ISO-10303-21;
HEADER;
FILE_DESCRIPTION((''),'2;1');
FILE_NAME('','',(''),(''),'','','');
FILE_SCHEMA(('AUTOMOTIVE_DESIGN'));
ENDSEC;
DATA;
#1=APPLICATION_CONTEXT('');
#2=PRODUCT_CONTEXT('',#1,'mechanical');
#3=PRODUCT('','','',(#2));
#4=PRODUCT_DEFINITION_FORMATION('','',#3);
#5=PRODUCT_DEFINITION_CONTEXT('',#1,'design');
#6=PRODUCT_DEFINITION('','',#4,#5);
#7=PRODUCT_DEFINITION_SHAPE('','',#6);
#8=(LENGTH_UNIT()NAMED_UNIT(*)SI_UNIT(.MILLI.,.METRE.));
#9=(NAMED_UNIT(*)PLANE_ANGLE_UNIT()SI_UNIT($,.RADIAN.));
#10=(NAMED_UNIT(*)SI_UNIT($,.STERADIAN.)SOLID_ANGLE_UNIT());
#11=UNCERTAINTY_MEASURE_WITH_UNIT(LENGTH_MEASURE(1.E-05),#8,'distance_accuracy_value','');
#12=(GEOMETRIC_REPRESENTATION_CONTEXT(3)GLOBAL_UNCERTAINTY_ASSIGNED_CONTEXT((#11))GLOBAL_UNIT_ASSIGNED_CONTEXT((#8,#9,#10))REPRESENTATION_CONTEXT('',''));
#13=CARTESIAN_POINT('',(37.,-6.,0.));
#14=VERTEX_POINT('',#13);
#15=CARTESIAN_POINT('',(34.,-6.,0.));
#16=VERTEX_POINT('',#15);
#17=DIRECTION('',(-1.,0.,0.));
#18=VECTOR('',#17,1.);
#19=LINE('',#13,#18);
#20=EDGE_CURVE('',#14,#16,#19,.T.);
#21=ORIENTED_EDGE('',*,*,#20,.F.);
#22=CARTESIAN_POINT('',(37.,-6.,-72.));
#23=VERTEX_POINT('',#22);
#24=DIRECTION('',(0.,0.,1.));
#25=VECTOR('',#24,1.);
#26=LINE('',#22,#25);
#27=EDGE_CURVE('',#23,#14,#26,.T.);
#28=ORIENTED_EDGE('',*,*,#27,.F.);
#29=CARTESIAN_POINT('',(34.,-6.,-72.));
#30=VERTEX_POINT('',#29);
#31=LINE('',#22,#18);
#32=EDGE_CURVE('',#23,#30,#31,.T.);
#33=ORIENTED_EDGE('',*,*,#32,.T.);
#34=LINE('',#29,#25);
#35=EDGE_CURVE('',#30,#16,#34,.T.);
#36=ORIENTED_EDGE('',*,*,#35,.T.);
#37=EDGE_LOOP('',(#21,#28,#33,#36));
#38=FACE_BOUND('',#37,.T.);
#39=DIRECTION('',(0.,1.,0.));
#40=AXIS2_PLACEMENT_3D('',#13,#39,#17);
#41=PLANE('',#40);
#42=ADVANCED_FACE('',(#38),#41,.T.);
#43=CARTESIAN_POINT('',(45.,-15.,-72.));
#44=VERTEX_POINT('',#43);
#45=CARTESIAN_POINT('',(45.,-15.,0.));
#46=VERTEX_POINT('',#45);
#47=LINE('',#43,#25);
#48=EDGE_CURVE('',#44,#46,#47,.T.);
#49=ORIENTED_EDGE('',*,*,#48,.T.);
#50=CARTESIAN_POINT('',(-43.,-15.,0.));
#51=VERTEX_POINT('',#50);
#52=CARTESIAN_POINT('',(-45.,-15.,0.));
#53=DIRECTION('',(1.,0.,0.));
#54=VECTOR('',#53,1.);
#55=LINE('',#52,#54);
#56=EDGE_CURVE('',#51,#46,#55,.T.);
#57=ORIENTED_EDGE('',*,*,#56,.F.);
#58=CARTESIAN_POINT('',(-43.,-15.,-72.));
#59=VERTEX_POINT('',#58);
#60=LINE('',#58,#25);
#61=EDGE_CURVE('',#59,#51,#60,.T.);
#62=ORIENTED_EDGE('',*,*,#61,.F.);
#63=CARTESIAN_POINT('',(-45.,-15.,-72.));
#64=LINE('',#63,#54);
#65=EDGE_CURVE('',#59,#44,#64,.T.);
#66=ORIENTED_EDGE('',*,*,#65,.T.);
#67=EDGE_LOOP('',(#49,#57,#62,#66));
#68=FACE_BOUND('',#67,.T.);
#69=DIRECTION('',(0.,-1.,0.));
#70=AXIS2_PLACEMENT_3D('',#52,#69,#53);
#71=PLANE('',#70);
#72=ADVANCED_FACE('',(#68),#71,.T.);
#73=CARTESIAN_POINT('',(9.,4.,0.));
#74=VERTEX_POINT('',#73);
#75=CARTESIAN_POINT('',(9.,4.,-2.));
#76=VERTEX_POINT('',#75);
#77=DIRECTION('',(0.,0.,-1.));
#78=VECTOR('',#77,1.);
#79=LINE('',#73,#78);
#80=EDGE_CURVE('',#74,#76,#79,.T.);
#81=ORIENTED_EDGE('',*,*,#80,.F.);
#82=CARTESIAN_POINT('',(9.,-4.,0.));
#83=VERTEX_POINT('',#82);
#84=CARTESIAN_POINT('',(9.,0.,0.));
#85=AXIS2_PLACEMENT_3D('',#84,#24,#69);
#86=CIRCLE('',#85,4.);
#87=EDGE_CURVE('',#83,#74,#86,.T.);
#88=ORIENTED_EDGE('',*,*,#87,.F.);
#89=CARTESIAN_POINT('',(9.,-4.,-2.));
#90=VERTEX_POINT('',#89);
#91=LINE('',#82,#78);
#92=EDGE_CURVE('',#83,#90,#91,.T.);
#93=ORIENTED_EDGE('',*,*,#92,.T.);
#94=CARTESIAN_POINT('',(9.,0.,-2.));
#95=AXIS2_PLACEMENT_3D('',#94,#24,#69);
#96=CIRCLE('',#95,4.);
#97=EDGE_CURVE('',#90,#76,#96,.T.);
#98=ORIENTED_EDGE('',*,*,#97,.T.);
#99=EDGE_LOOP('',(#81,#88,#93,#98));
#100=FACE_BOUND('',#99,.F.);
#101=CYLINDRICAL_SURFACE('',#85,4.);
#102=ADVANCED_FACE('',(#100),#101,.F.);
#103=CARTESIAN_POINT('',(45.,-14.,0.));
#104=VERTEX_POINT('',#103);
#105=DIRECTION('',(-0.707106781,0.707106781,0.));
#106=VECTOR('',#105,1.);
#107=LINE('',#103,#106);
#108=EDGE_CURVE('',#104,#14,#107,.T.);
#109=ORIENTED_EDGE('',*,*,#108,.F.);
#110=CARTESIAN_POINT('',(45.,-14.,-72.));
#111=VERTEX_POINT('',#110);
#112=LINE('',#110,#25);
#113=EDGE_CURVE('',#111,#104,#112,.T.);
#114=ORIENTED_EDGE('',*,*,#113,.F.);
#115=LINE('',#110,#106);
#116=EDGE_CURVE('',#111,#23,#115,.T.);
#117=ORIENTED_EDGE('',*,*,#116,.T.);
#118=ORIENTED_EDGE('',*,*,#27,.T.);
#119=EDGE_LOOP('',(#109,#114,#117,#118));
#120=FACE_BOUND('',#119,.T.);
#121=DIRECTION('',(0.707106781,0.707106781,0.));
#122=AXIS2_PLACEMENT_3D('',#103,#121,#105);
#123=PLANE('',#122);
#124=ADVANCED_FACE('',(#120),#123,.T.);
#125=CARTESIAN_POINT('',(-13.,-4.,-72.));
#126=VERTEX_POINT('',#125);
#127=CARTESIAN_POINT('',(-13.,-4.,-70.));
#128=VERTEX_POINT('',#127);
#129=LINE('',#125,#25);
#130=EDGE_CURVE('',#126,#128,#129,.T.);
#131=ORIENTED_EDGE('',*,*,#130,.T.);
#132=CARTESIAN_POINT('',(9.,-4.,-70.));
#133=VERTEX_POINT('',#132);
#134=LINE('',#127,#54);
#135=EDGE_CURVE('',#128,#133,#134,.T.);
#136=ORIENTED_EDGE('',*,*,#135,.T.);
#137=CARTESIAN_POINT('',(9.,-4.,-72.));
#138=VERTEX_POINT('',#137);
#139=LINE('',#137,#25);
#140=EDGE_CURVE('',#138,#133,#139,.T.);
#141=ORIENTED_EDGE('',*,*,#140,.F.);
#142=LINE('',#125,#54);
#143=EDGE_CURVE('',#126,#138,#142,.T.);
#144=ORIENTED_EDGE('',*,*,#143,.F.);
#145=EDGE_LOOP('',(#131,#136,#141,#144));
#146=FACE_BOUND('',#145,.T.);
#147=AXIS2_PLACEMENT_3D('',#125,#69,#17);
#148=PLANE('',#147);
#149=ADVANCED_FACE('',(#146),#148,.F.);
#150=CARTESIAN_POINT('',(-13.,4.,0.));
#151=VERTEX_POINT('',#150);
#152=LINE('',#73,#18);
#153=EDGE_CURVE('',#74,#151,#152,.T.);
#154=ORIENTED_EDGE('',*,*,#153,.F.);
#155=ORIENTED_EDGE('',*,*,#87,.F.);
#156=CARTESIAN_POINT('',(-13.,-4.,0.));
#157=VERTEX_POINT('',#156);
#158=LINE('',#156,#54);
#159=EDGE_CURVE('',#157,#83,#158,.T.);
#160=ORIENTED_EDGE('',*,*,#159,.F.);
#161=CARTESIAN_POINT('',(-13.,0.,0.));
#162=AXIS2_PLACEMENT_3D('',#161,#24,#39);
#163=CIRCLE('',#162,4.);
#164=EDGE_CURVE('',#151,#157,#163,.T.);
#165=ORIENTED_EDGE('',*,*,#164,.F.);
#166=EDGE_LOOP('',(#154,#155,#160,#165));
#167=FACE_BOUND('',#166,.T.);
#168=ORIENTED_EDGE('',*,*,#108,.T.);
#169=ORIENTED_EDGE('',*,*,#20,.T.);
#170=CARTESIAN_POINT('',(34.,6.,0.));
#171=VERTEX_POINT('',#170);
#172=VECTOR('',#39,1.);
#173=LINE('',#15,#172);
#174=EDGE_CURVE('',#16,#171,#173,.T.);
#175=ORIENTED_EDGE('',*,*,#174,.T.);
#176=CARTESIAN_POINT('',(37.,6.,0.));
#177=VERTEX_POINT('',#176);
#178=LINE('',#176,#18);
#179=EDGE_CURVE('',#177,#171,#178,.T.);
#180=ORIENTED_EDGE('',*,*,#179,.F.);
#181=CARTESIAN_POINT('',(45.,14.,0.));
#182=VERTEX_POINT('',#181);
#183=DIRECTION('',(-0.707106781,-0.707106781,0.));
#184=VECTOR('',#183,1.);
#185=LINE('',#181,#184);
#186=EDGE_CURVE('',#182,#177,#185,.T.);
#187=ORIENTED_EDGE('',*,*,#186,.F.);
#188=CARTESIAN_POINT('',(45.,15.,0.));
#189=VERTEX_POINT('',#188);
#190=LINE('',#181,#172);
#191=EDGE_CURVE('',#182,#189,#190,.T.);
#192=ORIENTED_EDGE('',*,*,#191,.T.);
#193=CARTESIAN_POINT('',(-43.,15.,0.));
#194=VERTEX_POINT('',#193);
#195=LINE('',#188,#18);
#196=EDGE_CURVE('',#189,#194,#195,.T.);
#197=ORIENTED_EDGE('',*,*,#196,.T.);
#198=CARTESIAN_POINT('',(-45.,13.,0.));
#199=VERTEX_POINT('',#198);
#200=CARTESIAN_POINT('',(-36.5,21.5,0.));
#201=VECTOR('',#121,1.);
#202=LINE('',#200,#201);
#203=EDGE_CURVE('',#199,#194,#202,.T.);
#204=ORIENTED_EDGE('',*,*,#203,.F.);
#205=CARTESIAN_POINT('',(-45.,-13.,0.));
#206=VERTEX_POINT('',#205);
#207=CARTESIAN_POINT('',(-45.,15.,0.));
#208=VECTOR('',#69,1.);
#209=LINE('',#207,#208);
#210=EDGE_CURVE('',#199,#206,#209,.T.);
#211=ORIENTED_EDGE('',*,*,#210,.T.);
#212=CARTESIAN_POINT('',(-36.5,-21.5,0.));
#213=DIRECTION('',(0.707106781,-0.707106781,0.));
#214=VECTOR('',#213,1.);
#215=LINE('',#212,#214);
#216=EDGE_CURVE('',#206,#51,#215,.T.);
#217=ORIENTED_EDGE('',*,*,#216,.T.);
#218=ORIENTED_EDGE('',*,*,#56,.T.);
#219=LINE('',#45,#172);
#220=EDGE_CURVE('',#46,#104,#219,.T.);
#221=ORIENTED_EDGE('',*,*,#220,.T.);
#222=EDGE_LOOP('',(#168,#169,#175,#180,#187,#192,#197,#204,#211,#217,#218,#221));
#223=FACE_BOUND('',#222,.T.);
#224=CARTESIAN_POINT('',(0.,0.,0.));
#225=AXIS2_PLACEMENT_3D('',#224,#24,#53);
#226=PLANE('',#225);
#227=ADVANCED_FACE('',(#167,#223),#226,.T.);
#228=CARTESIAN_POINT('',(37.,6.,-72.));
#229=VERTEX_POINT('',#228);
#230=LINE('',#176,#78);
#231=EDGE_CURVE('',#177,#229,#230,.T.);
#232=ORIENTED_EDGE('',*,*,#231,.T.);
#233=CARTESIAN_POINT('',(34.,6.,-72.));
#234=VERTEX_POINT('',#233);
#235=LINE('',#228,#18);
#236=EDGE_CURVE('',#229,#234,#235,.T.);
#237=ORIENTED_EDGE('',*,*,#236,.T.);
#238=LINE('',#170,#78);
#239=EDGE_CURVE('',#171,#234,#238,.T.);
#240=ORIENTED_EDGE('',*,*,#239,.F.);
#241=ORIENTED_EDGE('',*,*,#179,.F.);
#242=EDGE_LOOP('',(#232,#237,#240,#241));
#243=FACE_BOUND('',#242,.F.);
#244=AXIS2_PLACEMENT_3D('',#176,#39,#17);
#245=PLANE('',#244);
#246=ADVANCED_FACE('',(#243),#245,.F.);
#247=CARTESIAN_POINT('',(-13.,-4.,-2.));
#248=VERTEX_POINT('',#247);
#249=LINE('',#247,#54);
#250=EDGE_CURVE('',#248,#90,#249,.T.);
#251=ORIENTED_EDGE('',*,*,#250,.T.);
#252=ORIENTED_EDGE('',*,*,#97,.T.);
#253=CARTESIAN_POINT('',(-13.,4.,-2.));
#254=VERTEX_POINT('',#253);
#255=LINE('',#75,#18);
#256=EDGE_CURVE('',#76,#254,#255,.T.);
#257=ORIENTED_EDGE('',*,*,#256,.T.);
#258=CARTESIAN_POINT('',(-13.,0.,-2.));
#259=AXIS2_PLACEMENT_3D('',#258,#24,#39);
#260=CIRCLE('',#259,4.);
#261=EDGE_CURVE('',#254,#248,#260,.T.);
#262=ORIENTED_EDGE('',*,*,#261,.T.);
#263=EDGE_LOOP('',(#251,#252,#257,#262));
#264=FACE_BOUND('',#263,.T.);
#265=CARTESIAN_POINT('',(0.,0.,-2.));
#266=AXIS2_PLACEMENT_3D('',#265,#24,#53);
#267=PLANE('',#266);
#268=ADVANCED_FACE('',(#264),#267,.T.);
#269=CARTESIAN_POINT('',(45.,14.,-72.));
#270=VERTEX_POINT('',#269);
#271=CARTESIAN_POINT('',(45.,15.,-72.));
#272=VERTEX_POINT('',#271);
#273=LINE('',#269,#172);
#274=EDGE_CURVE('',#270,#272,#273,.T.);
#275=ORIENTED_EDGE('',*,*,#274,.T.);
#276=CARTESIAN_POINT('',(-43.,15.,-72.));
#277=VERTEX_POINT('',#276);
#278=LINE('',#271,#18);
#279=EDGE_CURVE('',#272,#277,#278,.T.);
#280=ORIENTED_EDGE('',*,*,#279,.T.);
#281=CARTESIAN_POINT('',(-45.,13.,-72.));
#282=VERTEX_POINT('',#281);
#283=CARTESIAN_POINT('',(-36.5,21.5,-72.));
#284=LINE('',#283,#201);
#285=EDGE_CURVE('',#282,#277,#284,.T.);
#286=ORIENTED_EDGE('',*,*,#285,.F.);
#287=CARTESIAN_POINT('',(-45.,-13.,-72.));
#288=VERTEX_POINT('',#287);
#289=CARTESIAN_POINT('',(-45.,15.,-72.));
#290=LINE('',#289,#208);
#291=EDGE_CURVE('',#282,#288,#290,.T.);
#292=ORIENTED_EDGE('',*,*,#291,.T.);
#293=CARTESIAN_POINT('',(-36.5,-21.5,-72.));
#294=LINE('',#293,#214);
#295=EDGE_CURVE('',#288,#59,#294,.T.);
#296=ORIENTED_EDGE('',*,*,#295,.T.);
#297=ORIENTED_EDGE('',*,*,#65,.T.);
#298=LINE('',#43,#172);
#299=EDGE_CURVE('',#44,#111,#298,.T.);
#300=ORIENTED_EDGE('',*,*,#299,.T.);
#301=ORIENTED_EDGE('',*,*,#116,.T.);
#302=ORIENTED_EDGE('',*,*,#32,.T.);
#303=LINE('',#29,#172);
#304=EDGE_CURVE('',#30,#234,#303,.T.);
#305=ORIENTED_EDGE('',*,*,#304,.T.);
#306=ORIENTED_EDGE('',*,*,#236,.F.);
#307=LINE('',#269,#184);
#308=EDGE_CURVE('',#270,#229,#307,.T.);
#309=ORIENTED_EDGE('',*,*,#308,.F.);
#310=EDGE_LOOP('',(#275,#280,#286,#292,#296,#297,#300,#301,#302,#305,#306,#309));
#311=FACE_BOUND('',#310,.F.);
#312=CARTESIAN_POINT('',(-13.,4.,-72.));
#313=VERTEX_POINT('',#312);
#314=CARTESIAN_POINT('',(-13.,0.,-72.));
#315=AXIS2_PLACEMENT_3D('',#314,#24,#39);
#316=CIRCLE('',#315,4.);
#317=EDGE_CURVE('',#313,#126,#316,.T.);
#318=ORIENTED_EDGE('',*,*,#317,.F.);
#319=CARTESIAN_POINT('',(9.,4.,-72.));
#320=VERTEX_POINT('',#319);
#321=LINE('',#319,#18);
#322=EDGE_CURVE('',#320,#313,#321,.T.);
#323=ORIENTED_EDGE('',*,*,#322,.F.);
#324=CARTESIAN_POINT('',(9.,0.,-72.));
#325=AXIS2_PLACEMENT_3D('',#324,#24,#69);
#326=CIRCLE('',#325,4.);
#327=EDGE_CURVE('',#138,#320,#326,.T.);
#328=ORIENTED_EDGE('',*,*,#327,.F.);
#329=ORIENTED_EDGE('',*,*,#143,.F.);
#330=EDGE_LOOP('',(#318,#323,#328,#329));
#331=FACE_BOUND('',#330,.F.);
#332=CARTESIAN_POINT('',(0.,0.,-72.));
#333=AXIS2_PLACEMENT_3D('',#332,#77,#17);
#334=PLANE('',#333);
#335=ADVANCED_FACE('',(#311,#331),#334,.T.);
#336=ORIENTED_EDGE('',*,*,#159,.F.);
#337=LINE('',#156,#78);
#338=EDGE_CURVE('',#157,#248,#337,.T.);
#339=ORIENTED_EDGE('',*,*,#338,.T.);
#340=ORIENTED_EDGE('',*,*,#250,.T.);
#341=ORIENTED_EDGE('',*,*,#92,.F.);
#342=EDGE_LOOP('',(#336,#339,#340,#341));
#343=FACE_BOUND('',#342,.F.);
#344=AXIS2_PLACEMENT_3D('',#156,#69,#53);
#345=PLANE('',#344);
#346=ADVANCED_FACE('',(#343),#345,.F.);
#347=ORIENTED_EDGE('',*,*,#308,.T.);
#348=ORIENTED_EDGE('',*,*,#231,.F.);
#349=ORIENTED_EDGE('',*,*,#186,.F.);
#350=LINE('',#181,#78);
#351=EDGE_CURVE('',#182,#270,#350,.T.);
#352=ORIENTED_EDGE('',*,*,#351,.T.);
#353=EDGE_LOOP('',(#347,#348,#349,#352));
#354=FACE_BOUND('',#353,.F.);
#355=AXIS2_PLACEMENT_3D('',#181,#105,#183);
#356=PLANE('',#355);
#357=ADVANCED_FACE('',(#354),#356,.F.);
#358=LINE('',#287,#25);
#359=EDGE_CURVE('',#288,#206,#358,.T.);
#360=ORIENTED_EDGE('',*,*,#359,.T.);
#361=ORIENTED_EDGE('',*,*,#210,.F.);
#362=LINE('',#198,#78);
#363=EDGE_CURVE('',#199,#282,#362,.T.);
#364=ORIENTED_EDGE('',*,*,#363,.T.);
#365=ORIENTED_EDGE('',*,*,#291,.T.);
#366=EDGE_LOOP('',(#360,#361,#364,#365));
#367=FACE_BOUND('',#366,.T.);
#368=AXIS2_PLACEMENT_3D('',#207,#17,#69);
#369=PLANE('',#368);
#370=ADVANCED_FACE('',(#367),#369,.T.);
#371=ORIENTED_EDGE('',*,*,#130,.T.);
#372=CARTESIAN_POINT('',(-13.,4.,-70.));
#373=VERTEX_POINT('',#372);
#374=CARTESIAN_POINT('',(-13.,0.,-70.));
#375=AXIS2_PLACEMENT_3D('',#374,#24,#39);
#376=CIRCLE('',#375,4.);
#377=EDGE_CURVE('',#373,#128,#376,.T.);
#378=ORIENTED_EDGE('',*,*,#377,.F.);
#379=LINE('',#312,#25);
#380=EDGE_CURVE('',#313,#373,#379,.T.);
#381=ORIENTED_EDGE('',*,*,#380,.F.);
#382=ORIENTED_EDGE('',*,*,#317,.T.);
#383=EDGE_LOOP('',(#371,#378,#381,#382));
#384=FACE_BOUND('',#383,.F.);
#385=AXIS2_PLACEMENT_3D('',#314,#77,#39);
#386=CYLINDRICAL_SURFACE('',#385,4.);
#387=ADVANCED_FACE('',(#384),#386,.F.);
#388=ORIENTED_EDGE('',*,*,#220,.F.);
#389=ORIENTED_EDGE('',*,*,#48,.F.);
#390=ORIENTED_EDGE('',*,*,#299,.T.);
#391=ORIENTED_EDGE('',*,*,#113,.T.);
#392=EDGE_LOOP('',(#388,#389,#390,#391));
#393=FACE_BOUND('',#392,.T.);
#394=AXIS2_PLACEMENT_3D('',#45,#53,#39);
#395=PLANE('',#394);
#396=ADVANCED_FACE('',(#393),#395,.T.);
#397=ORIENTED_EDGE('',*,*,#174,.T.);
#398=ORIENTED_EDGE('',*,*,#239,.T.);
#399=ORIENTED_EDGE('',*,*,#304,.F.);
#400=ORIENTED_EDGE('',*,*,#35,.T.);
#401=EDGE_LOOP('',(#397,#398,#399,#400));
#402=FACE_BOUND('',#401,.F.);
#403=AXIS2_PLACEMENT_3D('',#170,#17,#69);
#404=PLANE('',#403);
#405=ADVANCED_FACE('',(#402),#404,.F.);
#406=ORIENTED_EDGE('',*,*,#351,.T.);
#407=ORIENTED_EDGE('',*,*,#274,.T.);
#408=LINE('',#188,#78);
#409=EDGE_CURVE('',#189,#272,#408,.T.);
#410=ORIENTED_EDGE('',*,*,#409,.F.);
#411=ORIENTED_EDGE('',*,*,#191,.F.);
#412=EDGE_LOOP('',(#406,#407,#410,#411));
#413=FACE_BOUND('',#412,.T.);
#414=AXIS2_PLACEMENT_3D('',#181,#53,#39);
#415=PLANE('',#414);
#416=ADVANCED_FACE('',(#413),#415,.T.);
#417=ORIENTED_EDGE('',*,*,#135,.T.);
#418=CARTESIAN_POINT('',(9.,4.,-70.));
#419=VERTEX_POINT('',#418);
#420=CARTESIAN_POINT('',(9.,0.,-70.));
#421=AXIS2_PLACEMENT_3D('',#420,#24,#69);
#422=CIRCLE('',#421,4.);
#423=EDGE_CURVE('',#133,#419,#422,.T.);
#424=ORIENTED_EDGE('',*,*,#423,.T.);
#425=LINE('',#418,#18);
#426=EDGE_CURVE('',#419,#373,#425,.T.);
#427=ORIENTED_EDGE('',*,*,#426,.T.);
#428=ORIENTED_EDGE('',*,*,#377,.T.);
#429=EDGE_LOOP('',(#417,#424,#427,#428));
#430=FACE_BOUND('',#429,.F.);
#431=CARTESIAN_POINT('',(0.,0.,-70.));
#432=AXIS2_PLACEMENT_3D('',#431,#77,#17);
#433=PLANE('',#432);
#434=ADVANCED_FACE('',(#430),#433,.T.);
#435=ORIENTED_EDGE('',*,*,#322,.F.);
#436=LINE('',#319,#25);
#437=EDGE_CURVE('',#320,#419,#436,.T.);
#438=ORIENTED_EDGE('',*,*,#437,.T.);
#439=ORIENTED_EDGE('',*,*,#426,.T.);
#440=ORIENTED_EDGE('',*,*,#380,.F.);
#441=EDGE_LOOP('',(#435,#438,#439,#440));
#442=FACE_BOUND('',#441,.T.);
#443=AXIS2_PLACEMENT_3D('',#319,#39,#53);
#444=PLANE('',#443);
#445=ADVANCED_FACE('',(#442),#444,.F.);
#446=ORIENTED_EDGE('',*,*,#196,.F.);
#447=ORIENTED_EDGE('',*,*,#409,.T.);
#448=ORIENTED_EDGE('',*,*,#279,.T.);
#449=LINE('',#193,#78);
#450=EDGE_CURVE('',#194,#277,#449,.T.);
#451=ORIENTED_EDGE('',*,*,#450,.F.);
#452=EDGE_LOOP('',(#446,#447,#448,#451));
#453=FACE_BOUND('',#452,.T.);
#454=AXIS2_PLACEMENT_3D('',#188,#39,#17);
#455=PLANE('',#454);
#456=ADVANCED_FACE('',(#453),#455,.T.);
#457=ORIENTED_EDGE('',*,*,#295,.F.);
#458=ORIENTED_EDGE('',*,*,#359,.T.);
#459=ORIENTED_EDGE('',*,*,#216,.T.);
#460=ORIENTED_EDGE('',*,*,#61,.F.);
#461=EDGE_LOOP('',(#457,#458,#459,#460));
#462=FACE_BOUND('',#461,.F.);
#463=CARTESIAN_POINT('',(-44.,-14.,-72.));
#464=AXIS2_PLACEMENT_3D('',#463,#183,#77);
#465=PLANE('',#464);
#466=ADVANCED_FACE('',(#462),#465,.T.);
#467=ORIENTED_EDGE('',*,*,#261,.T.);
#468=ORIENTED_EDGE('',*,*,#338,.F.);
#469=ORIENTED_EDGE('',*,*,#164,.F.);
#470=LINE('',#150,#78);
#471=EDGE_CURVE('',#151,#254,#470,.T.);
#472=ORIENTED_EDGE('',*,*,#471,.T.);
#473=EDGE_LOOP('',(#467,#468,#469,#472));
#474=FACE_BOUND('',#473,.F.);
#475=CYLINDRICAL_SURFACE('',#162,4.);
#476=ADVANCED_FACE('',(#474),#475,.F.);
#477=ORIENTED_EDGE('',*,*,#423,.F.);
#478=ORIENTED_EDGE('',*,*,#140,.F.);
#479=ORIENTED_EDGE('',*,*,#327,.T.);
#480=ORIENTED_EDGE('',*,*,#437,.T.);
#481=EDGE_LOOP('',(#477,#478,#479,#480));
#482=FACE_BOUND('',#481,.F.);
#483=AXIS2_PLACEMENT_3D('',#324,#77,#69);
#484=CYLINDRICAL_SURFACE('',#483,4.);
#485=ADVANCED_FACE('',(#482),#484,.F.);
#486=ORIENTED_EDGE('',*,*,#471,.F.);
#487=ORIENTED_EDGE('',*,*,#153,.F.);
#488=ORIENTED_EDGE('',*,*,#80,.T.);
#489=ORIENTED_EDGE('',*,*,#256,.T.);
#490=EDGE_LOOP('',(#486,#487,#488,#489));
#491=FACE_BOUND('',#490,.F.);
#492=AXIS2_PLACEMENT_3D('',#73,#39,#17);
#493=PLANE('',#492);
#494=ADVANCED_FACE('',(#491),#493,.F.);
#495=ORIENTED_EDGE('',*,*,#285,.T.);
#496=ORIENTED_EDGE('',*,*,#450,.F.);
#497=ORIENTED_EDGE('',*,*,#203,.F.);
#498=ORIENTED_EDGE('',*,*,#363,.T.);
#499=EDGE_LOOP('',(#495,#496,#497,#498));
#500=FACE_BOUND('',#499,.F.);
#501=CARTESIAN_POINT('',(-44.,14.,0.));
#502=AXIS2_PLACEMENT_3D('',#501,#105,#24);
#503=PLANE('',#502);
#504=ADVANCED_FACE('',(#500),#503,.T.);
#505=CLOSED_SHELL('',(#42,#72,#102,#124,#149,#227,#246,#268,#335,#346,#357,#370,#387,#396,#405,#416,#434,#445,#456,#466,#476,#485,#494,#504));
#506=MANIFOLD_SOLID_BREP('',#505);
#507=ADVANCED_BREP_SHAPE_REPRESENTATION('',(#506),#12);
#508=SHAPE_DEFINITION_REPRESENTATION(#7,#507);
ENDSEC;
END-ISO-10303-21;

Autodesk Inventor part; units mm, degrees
ref_plane "YZ Plane" through (0, 0, 0) normal (1, 0, 0) x (0, 1, 0)
ref_plane "XZ Plane" through (0, 0, 0) normal (0, 1, 0) x (-1, 0, 0)
ref_plane "XY Plane" through (0, 0, 0) normal (0, 0, 1) x (1, 0, 0)
sketch "Эскиз1" plane through (0, 0, 0) normal (0, 0, 1) x (1, 0, 0)
  line L0 (-45, -15) -> (45, -15)
  line L1 (45, 15) -> (-45, 15)
  line L2 (-45, 15) -> (-45, -15)
  line L3 (-45, -15) -> (45, 15) construction
  line L4 (45, -15) -> (-45, 15) construction
  line L5 (45, 14) -> (37, 6)
  line L6 (37, 6) -> (34, 6)
  line L7 (34, 6) -> (34, 0)
  line L8 (34, 0) -> (45, 0) construction
  line L9 (45, -14) -> (37, -6)
  line L10 (37, -6) -> (34, -6)
  line L11 (34, -6) -> (34, 0)
  line L12 (-13, 0) -> (9, 0) construction
  line L13 (-13, -4) -> (9, -4)
  line L14 (9, 4) -> (-13, 4)
  arc A0 (-13, 4) -> (-13, -4) centre (-13, 0) ccw
  arc A1 (9, -4) -> (9, 4) centre (9, 0) ccw
  line L15 (45, -15) -> (45, -14)
  line L16 (45, 14) -> (45, 15)
  circle A2 centre (51.5061, 0) radius 14.5 construction
  point P0 (0, 0)
  point P1 (0, 0)
  point P2 (-2, 0)
  point P3 (0, 0)
  dimension "d0" = 90
  dimension "d1" = 28
  dimension "d2" = 12
  dimension "d3" = 30
  dimension "d4" = 90
  dimension "d5" = 4
  dimension "d6" = 22
  dimension "d7" = 36
  dimension "d9" = 11
  dimension "d17" = 29
  dimension "d18" = 6.5061
extrude "Выдавливание1" add sketch "Эскиз1" against normal blind 36 contours L2 L1 L16 L5 L6 L7 L11 L10 L9 L15 L0 | A0 L14 A1 L13
extrude "Выдавливание2" cut sketch "Эскиз1" against normal blind 2 contours A0 L14 A1 L13
mirror "Зеркальное отражение1" about plane through (1.1429, 0, -36) normal (0, 0, -1)
chamfer "Фаска1" distance 2 angle 45 2 edges at (-45, 15, -36) (-45, -15, -36)
properties part number "Призма 5"
